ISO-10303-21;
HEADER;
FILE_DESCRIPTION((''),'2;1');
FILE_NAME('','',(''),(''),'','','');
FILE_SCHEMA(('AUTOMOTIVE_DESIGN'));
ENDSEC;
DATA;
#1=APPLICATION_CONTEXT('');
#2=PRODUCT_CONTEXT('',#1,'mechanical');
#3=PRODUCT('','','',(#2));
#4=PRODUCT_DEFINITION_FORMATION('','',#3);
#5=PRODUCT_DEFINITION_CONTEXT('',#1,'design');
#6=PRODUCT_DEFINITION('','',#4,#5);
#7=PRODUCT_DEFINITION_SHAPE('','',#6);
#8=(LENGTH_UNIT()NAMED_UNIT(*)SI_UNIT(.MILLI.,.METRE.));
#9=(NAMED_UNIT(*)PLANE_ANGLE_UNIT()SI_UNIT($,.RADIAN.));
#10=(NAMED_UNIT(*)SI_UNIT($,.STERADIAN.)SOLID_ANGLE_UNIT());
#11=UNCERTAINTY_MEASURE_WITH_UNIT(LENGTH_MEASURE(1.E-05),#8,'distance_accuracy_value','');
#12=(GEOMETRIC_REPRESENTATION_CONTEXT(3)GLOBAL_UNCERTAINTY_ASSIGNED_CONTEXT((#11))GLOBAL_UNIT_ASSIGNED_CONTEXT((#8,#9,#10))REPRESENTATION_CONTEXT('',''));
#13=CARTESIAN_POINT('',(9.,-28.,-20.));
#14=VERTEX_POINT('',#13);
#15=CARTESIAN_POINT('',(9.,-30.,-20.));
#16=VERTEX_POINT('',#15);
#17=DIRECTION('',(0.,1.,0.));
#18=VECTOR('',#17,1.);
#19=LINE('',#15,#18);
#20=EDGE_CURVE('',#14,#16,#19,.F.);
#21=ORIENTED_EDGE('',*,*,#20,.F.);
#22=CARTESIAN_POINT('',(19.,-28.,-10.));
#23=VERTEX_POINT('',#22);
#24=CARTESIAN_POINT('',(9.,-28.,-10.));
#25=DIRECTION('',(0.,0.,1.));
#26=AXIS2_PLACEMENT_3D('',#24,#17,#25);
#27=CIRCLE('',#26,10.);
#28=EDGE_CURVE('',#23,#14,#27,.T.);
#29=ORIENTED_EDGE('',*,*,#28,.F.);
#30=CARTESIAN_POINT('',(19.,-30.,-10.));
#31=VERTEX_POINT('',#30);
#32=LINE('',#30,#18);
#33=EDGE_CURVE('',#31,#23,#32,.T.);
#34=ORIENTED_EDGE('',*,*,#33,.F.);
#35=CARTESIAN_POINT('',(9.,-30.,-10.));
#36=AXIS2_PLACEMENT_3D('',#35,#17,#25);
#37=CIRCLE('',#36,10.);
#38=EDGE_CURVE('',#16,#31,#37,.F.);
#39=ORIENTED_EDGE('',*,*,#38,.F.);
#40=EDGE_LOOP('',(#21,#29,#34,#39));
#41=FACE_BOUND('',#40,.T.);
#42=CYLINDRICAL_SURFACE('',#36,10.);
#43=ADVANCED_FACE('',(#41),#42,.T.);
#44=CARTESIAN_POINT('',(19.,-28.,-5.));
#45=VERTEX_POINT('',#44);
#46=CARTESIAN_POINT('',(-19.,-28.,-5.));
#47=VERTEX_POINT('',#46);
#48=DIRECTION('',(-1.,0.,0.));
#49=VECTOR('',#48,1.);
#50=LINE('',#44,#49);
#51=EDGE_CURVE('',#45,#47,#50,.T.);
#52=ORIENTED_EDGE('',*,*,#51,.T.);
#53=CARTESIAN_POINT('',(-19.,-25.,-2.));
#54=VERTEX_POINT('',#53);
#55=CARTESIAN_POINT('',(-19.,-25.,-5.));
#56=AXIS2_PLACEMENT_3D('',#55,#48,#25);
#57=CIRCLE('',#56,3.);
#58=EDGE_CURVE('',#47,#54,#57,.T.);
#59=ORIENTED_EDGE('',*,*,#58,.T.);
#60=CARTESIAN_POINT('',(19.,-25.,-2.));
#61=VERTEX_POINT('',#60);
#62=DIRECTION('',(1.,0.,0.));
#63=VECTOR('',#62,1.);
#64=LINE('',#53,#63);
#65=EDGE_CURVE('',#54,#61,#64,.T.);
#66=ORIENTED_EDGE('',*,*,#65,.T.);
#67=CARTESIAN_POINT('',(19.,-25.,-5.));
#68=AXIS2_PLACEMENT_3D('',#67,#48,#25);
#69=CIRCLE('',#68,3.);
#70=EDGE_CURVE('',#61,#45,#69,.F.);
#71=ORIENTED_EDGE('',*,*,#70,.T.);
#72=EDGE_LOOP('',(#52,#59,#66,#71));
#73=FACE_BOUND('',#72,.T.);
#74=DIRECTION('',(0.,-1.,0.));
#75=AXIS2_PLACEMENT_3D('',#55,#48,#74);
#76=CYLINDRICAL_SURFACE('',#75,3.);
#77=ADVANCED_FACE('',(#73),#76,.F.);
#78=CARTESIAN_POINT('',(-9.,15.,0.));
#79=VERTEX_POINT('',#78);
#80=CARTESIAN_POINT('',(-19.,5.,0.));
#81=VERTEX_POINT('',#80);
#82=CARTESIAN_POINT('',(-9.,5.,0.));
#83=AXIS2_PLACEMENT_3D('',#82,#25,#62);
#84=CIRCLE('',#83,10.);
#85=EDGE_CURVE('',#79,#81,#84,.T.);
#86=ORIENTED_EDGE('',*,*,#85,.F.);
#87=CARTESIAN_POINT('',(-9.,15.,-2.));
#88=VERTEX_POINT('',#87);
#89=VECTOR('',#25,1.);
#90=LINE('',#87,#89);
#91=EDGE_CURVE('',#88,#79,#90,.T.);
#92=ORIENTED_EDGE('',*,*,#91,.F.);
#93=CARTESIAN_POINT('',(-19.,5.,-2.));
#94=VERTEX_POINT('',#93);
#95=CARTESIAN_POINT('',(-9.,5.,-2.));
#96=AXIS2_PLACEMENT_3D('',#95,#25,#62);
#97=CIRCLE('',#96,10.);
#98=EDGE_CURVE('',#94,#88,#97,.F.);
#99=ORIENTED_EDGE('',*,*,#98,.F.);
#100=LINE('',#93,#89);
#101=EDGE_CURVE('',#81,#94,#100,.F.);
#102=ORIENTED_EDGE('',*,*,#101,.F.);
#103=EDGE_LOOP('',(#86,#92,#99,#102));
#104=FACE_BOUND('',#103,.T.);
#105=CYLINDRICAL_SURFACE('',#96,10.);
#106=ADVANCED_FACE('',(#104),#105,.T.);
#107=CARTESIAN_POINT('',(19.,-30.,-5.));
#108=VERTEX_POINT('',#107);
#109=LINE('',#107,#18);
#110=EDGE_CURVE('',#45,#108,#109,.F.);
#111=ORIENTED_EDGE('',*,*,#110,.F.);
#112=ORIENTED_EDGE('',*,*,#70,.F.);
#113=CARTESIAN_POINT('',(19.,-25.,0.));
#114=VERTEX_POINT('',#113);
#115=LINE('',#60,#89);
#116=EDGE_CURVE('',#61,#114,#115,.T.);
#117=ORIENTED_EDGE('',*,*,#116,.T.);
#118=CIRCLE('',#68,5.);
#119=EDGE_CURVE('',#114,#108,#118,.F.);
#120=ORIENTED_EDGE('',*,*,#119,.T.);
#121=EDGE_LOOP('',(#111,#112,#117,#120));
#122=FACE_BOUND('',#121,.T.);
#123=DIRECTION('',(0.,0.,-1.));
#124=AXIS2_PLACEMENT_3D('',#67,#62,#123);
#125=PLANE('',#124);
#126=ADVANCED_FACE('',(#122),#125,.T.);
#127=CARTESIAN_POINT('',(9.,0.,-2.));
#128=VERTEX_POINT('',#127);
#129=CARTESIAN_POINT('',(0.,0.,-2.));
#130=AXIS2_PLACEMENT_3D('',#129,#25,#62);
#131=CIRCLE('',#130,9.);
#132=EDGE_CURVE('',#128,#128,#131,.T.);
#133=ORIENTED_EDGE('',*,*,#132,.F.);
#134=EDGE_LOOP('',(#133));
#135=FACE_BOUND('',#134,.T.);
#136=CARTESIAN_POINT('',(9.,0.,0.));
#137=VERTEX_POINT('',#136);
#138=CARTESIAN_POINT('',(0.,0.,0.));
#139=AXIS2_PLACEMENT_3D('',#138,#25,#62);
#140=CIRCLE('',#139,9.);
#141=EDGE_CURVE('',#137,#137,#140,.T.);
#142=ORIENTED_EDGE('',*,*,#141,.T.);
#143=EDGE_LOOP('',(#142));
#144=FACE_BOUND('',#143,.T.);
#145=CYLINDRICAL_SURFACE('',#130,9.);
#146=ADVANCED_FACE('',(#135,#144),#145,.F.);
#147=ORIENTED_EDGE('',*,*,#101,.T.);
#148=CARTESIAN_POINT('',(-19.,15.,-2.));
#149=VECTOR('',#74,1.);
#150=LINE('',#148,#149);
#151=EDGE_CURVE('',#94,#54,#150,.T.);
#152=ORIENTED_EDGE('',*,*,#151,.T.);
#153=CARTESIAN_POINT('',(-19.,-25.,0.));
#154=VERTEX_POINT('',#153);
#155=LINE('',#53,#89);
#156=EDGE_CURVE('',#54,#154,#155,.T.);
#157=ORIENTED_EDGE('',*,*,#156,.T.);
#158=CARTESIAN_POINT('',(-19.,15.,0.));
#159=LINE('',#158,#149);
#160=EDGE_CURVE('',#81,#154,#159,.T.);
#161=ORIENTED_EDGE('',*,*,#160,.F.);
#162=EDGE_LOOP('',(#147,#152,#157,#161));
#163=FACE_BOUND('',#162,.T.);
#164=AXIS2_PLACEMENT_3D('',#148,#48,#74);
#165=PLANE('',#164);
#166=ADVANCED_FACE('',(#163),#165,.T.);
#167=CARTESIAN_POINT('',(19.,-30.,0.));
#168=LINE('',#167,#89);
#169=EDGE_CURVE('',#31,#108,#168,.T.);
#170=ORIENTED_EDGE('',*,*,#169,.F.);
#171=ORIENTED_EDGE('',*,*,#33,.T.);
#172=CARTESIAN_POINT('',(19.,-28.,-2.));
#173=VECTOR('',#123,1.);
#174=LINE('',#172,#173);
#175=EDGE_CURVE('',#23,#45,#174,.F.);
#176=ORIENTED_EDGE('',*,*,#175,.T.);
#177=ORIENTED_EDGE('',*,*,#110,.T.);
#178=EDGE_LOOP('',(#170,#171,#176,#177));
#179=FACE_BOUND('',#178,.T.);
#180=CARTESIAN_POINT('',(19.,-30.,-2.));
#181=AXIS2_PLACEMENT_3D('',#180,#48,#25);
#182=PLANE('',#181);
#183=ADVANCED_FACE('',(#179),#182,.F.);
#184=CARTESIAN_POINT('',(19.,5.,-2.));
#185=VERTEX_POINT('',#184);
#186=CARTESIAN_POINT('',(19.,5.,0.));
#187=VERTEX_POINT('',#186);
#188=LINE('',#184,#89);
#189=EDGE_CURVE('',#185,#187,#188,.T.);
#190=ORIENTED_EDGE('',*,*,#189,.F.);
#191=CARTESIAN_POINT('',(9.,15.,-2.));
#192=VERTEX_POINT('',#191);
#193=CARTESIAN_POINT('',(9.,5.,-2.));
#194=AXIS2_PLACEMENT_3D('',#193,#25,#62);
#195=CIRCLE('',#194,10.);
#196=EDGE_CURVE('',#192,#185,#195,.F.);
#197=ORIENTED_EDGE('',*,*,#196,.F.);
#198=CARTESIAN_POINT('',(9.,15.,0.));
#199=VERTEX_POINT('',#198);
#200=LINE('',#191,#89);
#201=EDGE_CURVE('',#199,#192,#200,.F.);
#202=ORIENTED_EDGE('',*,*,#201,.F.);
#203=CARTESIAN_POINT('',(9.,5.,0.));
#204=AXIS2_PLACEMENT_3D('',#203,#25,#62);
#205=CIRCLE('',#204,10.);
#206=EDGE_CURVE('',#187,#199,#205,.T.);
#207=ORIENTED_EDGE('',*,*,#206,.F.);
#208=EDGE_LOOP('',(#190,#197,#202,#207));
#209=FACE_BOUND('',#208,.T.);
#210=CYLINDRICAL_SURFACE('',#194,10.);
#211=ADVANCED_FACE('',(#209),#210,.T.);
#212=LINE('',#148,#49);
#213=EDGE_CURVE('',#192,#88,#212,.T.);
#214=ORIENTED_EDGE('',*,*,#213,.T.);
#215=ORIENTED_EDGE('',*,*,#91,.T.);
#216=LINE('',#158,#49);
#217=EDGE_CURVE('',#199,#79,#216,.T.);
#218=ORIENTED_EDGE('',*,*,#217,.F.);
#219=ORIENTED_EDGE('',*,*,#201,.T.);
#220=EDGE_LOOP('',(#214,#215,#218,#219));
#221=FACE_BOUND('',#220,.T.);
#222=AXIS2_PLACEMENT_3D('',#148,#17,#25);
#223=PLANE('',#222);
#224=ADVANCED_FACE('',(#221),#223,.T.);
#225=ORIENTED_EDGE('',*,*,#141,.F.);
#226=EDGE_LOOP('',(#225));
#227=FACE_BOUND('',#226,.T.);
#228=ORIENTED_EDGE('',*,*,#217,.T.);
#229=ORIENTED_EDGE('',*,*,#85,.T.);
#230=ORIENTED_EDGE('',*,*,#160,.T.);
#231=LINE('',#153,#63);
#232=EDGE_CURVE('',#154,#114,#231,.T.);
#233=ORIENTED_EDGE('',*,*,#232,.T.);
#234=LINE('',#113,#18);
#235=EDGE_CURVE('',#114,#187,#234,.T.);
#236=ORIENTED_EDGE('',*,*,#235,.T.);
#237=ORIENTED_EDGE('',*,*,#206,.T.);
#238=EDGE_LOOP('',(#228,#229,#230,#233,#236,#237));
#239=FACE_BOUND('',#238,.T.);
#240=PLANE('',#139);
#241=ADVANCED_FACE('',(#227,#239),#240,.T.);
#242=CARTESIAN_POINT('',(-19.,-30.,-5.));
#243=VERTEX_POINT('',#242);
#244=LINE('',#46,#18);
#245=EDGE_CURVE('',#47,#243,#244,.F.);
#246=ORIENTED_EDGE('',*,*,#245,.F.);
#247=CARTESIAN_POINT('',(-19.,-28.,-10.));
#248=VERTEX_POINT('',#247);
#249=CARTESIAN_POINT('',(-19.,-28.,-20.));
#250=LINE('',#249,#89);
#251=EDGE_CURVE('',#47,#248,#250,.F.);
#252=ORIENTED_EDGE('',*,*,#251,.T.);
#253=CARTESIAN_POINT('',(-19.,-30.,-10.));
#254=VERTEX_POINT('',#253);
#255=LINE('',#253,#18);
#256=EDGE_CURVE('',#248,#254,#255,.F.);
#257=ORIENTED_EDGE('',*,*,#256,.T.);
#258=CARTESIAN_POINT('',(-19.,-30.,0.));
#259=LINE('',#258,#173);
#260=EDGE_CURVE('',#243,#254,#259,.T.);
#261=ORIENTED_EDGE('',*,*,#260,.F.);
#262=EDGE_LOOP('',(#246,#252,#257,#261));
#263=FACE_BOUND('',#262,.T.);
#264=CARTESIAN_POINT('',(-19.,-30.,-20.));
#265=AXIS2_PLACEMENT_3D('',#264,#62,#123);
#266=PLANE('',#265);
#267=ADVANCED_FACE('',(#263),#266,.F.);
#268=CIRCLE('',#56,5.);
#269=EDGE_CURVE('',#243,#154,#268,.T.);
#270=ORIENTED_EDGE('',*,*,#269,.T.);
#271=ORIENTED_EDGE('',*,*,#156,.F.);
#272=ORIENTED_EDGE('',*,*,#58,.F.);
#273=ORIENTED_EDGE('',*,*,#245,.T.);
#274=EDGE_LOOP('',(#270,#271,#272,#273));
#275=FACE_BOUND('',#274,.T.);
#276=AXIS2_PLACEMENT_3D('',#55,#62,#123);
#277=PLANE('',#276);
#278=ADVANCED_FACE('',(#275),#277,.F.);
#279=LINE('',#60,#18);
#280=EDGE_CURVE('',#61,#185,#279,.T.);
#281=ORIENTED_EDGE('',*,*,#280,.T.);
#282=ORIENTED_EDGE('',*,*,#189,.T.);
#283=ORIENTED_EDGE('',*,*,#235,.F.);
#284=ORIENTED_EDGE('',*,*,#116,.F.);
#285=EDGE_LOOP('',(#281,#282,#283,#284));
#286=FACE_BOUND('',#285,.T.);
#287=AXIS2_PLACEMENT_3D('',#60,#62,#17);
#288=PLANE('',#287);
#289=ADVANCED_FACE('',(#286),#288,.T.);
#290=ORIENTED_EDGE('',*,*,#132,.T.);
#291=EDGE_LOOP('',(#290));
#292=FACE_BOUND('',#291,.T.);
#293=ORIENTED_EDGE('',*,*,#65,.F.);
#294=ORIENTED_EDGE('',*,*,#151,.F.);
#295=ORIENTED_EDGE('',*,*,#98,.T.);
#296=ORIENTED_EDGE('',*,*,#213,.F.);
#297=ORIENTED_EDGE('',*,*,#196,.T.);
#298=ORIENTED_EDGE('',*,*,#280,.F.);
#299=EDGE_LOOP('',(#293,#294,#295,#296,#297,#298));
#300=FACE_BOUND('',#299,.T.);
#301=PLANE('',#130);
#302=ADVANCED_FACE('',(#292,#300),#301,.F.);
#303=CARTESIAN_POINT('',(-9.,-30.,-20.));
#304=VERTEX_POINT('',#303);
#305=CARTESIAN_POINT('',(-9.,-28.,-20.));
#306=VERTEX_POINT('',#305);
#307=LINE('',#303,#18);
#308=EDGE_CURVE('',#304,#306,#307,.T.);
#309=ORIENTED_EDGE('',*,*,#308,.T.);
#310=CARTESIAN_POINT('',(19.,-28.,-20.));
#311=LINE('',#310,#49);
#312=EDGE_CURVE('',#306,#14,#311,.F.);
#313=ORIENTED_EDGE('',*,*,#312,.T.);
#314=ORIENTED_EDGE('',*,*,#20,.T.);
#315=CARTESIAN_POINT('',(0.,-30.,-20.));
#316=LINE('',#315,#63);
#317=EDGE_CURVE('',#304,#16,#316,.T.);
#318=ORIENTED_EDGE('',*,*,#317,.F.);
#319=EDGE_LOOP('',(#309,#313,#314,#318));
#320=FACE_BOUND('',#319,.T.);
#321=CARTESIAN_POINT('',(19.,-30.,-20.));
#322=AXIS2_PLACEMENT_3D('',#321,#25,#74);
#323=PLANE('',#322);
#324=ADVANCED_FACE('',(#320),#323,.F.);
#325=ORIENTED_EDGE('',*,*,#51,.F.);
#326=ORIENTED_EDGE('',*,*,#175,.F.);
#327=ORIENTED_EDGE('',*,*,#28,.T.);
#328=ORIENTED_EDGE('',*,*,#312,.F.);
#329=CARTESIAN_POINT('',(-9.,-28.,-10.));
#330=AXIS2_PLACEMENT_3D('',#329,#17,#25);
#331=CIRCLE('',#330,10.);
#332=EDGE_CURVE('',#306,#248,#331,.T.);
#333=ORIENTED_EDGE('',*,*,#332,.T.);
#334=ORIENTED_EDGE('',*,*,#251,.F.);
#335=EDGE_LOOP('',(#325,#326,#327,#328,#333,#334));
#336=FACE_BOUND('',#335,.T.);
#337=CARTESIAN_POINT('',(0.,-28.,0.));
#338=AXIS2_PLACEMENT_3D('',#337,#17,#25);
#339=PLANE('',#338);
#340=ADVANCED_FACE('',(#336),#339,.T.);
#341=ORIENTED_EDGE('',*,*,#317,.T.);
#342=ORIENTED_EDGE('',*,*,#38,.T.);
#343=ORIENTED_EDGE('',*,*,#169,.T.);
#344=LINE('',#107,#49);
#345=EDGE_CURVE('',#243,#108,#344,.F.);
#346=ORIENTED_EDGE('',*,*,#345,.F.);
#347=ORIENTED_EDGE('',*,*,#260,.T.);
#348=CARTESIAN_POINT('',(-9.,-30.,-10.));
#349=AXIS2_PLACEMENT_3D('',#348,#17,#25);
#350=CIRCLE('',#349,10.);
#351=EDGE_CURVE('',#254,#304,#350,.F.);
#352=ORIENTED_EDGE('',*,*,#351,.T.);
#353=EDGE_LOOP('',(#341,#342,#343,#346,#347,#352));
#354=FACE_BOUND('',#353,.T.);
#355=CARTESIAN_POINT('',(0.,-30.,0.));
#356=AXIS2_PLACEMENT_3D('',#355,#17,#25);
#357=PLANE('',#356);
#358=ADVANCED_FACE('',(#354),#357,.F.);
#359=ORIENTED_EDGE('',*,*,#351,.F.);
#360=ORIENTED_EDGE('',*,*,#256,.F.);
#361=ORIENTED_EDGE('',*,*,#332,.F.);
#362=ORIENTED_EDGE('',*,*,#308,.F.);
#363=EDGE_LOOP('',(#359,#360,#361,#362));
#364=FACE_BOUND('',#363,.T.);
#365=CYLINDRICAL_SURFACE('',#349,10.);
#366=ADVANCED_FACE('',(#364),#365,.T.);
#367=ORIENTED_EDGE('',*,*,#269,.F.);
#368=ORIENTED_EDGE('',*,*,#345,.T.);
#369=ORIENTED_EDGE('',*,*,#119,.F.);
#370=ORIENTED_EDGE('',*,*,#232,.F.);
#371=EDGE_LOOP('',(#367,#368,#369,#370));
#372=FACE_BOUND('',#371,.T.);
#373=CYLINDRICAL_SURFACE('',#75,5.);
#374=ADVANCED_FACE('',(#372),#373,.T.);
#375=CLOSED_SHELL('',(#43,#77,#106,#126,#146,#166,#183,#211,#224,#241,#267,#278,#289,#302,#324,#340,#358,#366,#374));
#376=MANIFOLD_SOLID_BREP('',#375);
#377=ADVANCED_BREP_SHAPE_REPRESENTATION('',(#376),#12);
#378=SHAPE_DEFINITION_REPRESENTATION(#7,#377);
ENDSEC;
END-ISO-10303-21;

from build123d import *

# Parameters (mm, degrees)
SKETCH_1_W             = 38
SKETCH_1_H             = 40
SKETCH_1_R             = 9
SM_BASE_FLANGE_1_DEPTH = 2
SM_EDGE_FLANGE_1_DEPTH = 38
FILLET_1_R             = 10


# Sheet-metal steps are written as plain solids
with BuildPart() as part:
    # Sketch 1 → 基体-法兰1 (new body)
    with BuildSketch(Plane.XY):
        with Locations((0, -5)):
            Rectangle(SKETCH_1_W, SKETCH_1_H)
        Circle(SKETCH_1_R, mode=Mode.SUBTRACT)
    extrude(amount=-SM_BASE_FLANGE_1_DEPTH)

    # 边线-法兰1 section (across the edge) → 边线-法兰1 (add)
    with BuildSketch(Plane(origin=(19, -28, -2), x_dir=(0, 1, 0), z_dir=(-1, 0, 0))):
        with BuildLine():
            Line((-2, 3), (-2, 18))
            Line((-2, 18), (0, 18))
            Line((0, 18), (0, 3))
            ThreePointArc((0, 3), (0.878679656, 0.878679656), (3, 0))
            Line((3, 0), (3, -2))
            ThreePointArc((3, -2), (-0.535533906, -0.535533906), (-2, 3))
        make_face()
    extrude(amount=SM_EDGE_FLANGE_1_DEPTH)

    # 圆角1
    fillet_1_edges = [part.edges().sort_by_distance(p)[0] for p in [
        (19, -29, -20),
        (-19, -29, -20),
        (19, 15, -1),
        (-19, 15, -1),
    ]]
    fillet(fillet_1_edges, radius=FILLET_1_R)


solid = part.part
